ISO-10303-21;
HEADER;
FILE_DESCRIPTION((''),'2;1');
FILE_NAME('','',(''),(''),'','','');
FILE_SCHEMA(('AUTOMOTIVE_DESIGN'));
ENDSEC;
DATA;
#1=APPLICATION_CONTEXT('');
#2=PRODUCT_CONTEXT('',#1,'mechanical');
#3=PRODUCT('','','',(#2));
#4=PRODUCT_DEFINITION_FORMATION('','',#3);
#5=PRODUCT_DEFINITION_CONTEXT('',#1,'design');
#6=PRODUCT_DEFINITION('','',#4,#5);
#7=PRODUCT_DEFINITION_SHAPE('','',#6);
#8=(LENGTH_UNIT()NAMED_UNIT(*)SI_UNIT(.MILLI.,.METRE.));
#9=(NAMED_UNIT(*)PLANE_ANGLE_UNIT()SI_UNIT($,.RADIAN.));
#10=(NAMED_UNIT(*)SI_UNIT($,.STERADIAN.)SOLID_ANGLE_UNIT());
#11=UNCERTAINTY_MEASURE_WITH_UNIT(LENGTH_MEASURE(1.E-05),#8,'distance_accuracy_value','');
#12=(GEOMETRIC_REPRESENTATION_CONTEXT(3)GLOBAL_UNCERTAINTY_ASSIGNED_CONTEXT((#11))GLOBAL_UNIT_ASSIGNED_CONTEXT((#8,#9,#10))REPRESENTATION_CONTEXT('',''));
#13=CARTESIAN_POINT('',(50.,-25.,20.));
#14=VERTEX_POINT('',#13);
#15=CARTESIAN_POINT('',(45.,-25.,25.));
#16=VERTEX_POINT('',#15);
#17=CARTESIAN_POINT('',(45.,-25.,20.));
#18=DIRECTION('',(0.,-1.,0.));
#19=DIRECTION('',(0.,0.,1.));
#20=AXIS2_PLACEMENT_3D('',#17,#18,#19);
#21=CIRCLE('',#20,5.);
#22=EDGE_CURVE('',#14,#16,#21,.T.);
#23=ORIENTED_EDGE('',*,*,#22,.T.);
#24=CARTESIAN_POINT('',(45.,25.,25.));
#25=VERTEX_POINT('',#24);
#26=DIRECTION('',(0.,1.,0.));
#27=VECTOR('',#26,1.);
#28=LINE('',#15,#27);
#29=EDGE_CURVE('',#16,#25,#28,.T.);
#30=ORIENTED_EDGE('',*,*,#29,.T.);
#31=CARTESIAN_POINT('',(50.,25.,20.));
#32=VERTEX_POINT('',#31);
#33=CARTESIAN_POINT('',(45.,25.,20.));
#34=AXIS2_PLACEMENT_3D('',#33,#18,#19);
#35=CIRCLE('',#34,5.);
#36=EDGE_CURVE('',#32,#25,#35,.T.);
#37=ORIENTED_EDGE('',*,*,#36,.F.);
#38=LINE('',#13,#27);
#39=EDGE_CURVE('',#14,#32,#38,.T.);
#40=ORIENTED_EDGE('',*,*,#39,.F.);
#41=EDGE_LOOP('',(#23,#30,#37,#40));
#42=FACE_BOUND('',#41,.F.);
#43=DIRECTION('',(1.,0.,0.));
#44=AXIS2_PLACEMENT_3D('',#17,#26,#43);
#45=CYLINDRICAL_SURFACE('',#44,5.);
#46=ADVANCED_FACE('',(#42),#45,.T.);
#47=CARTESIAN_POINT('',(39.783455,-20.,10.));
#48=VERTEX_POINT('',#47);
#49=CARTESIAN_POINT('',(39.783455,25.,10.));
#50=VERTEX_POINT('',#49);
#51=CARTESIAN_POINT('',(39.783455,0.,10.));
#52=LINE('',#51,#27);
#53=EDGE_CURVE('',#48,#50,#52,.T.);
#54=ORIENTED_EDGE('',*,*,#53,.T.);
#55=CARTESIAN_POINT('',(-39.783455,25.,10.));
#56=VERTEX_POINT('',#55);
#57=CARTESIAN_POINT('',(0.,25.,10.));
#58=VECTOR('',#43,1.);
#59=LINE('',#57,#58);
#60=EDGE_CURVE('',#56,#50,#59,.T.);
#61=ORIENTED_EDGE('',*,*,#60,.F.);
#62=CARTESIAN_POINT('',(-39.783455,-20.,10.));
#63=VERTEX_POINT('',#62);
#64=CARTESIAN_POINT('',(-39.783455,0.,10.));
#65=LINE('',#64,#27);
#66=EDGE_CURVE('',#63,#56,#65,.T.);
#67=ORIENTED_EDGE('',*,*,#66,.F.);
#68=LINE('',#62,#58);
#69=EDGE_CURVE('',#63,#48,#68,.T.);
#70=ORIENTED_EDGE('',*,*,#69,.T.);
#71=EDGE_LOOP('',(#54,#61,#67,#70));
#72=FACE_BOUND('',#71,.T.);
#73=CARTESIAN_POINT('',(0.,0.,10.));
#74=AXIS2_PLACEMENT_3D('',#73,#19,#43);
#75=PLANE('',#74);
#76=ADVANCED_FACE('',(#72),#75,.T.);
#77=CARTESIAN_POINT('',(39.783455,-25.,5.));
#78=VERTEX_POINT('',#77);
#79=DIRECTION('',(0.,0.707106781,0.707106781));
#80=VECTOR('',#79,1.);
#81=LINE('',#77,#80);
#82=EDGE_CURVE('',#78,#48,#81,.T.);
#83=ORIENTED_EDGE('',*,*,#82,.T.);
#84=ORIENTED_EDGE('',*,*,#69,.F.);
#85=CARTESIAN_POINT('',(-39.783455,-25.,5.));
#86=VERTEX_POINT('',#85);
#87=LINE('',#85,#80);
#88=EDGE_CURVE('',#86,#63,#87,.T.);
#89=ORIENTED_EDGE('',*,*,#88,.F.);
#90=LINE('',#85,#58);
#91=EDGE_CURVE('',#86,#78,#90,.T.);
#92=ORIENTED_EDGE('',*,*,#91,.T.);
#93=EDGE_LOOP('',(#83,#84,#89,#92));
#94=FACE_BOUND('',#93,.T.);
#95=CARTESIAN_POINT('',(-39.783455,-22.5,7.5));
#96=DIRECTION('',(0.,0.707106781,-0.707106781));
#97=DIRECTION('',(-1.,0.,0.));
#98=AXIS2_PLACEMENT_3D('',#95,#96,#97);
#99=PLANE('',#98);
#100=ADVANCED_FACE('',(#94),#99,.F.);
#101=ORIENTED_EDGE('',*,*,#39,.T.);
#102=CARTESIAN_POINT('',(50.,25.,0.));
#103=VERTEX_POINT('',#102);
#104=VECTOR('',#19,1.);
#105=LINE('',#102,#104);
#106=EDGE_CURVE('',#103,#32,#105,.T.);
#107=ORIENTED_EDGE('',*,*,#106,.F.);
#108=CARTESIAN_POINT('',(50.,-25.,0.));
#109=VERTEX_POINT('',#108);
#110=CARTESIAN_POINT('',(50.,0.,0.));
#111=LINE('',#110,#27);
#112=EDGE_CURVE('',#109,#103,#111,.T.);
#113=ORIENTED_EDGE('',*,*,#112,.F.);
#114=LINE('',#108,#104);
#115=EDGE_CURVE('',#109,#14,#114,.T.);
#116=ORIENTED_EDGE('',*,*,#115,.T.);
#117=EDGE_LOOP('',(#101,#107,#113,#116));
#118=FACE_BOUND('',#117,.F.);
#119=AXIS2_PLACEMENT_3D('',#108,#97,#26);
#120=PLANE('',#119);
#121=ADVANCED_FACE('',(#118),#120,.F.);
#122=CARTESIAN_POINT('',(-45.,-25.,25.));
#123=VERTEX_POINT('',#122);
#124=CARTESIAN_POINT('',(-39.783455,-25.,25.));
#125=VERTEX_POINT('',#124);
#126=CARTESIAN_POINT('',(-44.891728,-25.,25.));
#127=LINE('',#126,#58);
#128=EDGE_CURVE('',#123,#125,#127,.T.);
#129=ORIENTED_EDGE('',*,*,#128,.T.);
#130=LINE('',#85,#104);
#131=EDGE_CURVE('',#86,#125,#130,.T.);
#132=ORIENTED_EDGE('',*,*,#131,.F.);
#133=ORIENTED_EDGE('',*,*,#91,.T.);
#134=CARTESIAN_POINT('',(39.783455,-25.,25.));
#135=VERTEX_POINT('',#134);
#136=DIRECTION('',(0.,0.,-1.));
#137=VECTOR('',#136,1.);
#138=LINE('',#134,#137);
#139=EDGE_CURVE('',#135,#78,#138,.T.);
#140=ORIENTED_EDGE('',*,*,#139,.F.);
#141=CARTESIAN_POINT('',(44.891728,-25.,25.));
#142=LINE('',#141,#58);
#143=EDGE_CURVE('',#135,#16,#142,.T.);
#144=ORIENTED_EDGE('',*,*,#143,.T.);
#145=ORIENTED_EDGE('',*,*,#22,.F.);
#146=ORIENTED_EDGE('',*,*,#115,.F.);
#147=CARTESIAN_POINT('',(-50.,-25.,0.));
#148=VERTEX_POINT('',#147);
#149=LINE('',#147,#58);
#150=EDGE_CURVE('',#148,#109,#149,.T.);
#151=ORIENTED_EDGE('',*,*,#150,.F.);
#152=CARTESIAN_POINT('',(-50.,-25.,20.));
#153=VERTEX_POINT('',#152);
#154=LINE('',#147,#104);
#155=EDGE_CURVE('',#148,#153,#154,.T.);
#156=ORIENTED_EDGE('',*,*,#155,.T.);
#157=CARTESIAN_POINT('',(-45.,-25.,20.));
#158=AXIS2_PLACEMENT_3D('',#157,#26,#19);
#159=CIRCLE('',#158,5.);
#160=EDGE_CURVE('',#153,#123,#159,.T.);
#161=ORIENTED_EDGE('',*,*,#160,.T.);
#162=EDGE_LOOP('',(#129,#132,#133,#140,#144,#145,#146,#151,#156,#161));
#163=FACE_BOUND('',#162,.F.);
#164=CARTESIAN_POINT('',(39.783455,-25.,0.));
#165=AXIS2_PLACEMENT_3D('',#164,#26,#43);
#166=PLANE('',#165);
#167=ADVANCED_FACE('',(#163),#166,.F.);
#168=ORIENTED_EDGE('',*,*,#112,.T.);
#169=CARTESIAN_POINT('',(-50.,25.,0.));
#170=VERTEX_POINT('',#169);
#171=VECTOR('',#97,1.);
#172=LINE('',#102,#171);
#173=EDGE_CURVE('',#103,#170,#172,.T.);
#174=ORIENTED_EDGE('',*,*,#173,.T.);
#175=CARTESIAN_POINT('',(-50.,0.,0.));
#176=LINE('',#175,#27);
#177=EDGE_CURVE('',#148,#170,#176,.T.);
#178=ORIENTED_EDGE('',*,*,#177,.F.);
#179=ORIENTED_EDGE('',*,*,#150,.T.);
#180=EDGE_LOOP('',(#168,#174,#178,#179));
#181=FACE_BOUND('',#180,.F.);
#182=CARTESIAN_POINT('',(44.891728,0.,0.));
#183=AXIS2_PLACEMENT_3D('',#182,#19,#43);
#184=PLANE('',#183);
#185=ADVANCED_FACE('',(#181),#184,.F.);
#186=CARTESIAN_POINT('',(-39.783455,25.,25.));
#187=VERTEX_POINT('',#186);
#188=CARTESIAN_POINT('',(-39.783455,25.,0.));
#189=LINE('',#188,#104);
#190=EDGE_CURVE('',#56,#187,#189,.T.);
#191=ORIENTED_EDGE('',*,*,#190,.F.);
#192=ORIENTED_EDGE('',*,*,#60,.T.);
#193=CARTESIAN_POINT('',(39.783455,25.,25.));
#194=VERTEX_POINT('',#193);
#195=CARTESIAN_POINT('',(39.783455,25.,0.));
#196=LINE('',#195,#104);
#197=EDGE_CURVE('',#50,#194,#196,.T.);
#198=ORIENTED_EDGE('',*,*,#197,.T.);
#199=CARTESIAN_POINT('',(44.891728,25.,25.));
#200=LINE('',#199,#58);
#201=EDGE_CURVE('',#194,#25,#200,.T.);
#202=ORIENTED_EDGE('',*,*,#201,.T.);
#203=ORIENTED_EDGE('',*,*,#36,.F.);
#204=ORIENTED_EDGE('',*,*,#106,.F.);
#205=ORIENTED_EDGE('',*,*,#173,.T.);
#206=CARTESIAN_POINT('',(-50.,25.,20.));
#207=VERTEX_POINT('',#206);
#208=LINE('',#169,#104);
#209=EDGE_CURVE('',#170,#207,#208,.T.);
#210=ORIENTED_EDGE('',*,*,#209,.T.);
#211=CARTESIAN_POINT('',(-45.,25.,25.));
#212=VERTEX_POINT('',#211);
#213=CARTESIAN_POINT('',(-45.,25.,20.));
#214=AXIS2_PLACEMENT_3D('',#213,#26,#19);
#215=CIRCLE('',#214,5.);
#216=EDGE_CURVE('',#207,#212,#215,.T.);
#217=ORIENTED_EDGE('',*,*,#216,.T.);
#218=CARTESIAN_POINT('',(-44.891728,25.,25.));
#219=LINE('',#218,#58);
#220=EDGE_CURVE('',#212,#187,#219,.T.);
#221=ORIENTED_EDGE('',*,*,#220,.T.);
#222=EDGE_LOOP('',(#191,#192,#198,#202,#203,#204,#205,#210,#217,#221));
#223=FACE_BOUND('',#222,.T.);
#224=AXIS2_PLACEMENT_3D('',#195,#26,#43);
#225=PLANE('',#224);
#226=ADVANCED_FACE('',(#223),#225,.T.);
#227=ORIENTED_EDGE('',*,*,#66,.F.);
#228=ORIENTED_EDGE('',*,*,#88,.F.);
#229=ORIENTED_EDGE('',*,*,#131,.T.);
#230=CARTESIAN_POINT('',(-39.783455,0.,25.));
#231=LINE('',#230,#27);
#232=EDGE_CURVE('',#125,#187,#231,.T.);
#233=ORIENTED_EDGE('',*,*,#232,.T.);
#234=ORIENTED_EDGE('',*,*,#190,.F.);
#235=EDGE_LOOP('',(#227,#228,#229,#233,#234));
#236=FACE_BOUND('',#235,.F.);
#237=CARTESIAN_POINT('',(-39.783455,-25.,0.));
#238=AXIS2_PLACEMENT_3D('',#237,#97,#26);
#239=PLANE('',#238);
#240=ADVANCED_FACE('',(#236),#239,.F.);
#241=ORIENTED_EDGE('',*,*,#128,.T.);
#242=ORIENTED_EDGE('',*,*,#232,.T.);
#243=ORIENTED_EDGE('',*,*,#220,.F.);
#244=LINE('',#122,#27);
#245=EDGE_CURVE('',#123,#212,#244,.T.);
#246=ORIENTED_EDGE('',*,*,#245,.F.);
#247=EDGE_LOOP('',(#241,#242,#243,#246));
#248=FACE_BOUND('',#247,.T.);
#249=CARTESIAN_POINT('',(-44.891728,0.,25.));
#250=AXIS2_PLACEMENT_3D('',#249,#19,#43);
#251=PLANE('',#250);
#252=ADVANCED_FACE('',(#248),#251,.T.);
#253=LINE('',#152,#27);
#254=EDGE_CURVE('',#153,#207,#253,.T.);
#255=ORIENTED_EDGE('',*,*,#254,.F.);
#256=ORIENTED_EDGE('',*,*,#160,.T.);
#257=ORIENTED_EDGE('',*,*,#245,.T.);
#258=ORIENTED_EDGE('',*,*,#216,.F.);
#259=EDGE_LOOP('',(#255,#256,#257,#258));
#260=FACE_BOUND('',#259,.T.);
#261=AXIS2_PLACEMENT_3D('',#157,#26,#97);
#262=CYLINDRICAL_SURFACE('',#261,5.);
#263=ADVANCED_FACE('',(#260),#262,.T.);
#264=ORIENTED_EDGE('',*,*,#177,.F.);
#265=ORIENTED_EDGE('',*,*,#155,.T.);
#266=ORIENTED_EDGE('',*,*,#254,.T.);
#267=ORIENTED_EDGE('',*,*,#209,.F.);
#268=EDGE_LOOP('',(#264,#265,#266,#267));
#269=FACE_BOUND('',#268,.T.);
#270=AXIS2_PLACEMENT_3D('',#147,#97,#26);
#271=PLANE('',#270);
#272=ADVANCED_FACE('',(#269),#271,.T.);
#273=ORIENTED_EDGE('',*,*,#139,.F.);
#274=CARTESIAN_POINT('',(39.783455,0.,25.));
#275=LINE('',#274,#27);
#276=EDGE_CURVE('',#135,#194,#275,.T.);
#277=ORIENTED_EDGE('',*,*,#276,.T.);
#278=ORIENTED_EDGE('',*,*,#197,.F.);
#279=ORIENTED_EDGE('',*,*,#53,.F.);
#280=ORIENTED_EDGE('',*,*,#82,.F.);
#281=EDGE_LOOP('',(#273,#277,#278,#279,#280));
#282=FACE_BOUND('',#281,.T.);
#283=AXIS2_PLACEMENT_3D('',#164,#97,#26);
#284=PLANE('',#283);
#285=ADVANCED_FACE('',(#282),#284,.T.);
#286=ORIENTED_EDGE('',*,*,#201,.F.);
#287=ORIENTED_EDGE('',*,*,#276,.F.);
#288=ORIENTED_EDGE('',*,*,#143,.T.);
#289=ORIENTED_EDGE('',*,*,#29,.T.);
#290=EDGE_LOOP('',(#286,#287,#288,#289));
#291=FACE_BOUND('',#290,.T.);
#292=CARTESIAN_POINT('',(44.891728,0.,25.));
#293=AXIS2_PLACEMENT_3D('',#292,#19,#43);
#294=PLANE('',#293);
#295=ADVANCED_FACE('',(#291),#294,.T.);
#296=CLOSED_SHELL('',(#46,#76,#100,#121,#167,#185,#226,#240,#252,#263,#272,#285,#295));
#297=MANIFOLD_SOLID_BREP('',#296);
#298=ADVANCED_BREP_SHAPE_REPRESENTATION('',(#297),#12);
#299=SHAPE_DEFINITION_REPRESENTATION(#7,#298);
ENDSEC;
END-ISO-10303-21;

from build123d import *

# Parameters (mm, degrees)
F0_W     = 10.2165445685
F0_H     = 50
F1_DEPTH = 25
F0_W_2   = 79.5669108629
F2_DEPTH = 10
F3_DEPTH = 25
F4_R     = 5
F5_R     = 5
F6_SIZE  = 5


with BuildPart() as f1:
    # F0 (on Top) → F1 (new body)
    with BuildSketch(Plane.XY):
        with Locations((-44.8917277157, 0)):
            Rectangle(F0_W, F0_H)
    extrude(amount=F1_DEPTH)

    # F0 (on Top) → F2 (join)
    with BuildSketch(Plane.XY):
        Rectangle(F0_W_2, F0_H)
    extrude(amount=F2_DEPTH)

    # F0 (on Top) → F3 (join)
    with BuildSketch(Plane.XY):
        with Locations((44.8917277157, 0)):
            Rectangle(F0_W, F0_H)
    extrude(amount=F3_DEPTH)

    # F4
    f4_edges = [f1.edges().sort_by_distance(p)[0] for p in [
        (50, 0, 25),
    ]]
    fillet(f4_edges, radius=F4_R)

    # F5
    f5_edges = [f1.edges().sort_by_distance(p)[0] for p in [
        (-50, 0, 25),
    ]]
    fillet(f5_edges, radius=F5_R)

    # F6
    f6_edges = [f1.edges().sort_by_distance(p)[0] for p in [
        (0, -25, 10),
    ]]
    chamfer(f6_edges, length=F6_SIZE)


solid = f1.part
